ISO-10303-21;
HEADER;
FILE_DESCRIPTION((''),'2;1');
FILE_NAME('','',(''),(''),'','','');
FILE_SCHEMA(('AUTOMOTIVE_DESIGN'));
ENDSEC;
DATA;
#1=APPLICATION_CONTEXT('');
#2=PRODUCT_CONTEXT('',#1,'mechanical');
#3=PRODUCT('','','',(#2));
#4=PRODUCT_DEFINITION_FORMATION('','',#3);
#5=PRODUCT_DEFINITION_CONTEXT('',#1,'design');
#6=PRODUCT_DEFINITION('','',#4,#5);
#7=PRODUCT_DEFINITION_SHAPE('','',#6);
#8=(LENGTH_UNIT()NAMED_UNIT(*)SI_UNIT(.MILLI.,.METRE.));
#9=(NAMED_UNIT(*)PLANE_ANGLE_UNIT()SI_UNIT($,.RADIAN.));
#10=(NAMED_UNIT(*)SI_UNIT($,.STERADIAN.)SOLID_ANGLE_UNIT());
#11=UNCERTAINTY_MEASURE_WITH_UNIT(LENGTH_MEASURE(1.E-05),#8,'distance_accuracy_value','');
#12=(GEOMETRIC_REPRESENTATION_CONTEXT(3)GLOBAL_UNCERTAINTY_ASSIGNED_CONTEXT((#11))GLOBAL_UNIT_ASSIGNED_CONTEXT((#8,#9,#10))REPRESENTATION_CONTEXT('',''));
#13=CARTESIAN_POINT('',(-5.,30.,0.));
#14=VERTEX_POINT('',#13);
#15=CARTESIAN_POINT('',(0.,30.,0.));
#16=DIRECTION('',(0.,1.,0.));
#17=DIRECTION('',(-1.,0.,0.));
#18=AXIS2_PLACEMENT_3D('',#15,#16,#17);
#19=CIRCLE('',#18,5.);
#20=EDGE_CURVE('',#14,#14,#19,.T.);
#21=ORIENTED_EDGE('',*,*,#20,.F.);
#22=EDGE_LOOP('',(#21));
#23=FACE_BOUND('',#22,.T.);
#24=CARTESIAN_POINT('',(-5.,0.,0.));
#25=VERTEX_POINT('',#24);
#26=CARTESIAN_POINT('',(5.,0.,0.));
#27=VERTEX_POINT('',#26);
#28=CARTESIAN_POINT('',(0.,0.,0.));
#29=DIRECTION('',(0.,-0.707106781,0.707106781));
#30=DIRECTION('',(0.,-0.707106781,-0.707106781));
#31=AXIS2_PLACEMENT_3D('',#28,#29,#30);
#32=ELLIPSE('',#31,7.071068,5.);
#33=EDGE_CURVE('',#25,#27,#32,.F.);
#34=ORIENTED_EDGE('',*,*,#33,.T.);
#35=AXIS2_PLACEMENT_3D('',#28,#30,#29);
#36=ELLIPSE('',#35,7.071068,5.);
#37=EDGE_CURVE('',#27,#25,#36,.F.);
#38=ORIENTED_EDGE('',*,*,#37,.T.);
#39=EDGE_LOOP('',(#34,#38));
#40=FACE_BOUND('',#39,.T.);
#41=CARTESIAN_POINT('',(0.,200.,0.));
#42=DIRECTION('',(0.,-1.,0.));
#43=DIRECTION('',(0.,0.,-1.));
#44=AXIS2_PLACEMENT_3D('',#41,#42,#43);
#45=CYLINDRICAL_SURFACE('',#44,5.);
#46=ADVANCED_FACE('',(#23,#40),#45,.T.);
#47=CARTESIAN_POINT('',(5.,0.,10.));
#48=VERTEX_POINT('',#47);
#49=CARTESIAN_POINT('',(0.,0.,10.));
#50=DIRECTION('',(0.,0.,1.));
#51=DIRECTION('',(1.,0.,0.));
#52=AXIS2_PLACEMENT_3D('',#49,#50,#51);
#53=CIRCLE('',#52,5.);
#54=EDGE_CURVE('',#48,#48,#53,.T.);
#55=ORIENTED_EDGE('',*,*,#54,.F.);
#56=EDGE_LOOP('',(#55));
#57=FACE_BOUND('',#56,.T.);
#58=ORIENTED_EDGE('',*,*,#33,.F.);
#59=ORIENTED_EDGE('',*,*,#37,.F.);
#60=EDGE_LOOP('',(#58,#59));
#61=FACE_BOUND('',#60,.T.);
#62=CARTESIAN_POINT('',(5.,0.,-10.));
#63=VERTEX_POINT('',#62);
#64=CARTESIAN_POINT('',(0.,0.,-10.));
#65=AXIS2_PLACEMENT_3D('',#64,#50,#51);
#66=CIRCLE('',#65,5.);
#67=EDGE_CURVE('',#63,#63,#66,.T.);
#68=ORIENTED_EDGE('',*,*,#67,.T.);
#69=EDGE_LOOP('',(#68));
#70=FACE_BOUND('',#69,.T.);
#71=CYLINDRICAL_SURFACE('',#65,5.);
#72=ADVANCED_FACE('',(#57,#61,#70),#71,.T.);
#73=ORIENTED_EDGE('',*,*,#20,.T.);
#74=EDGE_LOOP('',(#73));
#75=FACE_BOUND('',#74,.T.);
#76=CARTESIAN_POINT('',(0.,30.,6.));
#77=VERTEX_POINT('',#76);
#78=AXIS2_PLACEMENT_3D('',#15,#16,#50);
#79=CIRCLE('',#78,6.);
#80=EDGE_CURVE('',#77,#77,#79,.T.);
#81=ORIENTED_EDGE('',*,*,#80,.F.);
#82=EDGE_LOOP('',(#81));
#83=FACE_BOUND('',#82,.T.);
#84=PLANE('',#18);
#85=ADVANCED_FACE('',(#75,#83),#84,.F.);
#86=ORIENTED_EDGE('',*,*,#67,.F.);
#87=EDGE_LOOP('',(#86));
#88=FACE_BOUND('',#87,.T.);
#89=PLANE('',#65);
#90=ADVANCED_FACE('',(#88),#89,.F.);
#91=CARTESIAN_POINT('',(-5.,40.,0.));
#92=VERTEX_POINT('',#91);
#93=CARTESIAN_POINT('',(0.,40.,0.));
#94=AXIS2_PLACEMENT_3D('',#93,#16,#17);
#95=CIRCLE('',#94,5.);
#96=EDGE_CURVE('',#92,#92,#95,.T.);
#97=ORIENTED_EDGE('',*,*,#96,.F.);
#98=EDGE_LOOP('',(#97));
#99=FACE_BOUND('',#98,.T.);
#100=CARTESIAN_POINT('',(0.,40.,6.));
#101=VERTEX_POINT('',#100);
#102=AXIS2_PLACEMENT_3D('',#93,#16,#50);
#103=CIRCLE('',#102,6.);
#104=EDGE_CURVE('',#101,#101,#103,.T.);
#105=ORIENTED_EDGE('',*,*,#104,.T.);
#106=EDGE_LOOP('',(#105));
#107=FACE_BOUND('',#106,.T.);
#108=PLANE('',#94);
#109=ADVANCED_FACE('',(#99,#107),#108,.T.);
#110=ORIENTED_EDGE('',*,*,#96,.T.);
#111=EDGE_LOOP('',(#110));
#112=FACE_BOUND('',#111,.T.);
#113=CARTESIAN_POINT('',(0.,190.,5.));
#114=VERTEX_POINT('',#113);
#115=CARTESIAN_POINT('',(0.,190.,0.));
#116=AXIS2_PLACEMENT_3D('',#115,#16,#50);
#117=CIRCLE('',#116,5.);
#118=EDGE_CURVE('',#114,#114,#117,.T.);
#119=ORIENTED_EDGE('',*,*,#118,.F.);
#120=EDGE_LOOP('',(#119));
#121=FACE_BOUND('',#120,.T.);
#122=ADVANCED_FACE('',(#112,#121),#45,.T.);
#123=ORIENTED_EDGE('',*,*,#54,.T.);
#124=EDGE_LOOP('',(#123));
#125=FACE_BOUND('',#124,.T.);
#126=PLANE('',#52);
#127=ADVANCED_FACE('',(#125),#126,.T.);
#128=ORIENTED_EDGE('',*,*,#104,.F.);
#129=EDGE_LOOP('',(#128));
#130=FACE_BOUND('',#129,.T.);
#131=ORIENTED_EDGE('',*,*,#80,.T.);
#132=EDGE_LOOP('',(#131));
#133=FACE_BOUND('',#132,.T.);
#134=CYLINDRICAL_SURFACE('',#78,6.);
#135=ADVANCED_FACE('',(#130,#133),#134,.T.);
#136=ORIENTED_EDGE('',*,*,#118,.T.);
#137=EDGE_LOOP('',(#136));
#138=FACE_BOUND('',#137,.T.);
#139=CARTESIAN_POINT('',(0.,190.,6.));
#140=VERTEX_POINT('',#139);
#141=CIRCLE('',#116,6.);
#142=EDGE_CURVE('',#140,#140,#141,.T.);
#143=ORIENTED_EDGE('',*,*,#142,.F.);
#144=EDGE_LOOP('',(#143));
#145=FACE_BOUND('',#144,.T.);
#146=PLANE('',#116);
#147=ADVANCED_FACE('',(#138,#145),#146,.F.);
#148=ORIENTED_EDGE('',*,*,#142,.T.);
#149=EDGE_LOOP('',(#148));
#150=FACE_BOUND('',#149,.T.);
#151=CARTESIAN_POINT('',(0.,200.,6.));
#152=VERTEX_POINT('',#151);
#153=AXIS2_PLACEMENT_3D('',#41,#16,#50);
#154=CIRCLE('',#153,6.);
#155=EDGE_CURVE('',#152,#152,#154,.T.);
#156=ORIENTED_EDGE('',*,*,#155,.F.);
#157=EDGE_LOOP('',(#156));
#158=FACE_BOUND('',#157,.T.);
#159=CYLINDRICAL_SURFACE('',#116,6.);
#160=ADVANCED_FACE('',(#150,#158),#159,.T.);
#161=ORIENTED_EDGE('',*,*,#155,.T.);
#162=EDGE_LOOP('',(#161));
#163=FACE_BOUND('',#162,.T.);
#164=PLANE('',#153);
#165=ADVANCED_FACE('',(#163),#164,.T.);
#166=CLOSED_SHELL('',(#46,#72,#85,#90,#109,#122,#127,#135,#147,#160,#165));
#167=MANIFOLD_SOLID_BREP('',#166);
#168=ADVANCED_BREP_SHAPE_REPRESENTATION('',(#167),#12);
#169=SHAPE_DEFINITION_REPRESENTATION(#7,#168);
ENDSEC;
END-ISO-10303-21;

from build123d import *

# Parameters (mm, degrees)
SKETCH1_R                = 5
BOSS_EXTRUDE1_DEPTH      = 200
BOSS_EXTRUDE2_DEPTH      = 10
BOSS_EXTRUDE2_DEPTH_BACK = 10
SKETCH2_R                = 5
F_3DSKETCH1_R            = 6
BOSS_EXTRUDE3_DEPTH      = 10
BOSS_EXTRUDE4_START      = -10
SKETCH3_R                = 6
BOSS_EXTRUDE4_DEPTH      = 10


with BuildPart() as part:
    # Sketch1 → Boss-Extrude1 (new body)
    with BuildSketch(Plane(origin=(0, 0, 0), x_dir=(1, 0, 0), z_dir=(0, 1, 0))):
        Circle(SKETCH1_R)
    extrude(amount=BOSS_EXTRUDE1_DEPTH)

    # Sketch2 → Boss-Extrude2 (add, two sides: drawn at the far end of the back side and taken through both)
    with BuildSketch(Plane.XY.offset(-BOSS_EXTRUDE2_DEPTH_BACK)):
        Circle(SKETCH2_R)
    extrude(amount=BOSS_EXTRUDE2_DEPTH + BOSS_EXTRUDE2_DEPTH_BACK)

    # 3DSketch1 → Boss-Extrude3 (add)
    with BuildSketch(Plane.ZX.offset(30)):
        Circle(F_3DSKETCH1_R)
    extrude(amount=BOSS_EXTRUDE3_DEPTH)

    # Sketch3 → Boss-Extrude4 (add)
    with BuildSketch(Plane(origin=(0, 200, 0), x_dir=(1, 0, 0), z_dir=(0, 1, 0)).offset(BOSS_EXTRUDE4_START)):
        Circle(SKETCH3_R)
    extrude(amount=BOSS_EXTRUDE4_DEPTH)


solid = part.part
